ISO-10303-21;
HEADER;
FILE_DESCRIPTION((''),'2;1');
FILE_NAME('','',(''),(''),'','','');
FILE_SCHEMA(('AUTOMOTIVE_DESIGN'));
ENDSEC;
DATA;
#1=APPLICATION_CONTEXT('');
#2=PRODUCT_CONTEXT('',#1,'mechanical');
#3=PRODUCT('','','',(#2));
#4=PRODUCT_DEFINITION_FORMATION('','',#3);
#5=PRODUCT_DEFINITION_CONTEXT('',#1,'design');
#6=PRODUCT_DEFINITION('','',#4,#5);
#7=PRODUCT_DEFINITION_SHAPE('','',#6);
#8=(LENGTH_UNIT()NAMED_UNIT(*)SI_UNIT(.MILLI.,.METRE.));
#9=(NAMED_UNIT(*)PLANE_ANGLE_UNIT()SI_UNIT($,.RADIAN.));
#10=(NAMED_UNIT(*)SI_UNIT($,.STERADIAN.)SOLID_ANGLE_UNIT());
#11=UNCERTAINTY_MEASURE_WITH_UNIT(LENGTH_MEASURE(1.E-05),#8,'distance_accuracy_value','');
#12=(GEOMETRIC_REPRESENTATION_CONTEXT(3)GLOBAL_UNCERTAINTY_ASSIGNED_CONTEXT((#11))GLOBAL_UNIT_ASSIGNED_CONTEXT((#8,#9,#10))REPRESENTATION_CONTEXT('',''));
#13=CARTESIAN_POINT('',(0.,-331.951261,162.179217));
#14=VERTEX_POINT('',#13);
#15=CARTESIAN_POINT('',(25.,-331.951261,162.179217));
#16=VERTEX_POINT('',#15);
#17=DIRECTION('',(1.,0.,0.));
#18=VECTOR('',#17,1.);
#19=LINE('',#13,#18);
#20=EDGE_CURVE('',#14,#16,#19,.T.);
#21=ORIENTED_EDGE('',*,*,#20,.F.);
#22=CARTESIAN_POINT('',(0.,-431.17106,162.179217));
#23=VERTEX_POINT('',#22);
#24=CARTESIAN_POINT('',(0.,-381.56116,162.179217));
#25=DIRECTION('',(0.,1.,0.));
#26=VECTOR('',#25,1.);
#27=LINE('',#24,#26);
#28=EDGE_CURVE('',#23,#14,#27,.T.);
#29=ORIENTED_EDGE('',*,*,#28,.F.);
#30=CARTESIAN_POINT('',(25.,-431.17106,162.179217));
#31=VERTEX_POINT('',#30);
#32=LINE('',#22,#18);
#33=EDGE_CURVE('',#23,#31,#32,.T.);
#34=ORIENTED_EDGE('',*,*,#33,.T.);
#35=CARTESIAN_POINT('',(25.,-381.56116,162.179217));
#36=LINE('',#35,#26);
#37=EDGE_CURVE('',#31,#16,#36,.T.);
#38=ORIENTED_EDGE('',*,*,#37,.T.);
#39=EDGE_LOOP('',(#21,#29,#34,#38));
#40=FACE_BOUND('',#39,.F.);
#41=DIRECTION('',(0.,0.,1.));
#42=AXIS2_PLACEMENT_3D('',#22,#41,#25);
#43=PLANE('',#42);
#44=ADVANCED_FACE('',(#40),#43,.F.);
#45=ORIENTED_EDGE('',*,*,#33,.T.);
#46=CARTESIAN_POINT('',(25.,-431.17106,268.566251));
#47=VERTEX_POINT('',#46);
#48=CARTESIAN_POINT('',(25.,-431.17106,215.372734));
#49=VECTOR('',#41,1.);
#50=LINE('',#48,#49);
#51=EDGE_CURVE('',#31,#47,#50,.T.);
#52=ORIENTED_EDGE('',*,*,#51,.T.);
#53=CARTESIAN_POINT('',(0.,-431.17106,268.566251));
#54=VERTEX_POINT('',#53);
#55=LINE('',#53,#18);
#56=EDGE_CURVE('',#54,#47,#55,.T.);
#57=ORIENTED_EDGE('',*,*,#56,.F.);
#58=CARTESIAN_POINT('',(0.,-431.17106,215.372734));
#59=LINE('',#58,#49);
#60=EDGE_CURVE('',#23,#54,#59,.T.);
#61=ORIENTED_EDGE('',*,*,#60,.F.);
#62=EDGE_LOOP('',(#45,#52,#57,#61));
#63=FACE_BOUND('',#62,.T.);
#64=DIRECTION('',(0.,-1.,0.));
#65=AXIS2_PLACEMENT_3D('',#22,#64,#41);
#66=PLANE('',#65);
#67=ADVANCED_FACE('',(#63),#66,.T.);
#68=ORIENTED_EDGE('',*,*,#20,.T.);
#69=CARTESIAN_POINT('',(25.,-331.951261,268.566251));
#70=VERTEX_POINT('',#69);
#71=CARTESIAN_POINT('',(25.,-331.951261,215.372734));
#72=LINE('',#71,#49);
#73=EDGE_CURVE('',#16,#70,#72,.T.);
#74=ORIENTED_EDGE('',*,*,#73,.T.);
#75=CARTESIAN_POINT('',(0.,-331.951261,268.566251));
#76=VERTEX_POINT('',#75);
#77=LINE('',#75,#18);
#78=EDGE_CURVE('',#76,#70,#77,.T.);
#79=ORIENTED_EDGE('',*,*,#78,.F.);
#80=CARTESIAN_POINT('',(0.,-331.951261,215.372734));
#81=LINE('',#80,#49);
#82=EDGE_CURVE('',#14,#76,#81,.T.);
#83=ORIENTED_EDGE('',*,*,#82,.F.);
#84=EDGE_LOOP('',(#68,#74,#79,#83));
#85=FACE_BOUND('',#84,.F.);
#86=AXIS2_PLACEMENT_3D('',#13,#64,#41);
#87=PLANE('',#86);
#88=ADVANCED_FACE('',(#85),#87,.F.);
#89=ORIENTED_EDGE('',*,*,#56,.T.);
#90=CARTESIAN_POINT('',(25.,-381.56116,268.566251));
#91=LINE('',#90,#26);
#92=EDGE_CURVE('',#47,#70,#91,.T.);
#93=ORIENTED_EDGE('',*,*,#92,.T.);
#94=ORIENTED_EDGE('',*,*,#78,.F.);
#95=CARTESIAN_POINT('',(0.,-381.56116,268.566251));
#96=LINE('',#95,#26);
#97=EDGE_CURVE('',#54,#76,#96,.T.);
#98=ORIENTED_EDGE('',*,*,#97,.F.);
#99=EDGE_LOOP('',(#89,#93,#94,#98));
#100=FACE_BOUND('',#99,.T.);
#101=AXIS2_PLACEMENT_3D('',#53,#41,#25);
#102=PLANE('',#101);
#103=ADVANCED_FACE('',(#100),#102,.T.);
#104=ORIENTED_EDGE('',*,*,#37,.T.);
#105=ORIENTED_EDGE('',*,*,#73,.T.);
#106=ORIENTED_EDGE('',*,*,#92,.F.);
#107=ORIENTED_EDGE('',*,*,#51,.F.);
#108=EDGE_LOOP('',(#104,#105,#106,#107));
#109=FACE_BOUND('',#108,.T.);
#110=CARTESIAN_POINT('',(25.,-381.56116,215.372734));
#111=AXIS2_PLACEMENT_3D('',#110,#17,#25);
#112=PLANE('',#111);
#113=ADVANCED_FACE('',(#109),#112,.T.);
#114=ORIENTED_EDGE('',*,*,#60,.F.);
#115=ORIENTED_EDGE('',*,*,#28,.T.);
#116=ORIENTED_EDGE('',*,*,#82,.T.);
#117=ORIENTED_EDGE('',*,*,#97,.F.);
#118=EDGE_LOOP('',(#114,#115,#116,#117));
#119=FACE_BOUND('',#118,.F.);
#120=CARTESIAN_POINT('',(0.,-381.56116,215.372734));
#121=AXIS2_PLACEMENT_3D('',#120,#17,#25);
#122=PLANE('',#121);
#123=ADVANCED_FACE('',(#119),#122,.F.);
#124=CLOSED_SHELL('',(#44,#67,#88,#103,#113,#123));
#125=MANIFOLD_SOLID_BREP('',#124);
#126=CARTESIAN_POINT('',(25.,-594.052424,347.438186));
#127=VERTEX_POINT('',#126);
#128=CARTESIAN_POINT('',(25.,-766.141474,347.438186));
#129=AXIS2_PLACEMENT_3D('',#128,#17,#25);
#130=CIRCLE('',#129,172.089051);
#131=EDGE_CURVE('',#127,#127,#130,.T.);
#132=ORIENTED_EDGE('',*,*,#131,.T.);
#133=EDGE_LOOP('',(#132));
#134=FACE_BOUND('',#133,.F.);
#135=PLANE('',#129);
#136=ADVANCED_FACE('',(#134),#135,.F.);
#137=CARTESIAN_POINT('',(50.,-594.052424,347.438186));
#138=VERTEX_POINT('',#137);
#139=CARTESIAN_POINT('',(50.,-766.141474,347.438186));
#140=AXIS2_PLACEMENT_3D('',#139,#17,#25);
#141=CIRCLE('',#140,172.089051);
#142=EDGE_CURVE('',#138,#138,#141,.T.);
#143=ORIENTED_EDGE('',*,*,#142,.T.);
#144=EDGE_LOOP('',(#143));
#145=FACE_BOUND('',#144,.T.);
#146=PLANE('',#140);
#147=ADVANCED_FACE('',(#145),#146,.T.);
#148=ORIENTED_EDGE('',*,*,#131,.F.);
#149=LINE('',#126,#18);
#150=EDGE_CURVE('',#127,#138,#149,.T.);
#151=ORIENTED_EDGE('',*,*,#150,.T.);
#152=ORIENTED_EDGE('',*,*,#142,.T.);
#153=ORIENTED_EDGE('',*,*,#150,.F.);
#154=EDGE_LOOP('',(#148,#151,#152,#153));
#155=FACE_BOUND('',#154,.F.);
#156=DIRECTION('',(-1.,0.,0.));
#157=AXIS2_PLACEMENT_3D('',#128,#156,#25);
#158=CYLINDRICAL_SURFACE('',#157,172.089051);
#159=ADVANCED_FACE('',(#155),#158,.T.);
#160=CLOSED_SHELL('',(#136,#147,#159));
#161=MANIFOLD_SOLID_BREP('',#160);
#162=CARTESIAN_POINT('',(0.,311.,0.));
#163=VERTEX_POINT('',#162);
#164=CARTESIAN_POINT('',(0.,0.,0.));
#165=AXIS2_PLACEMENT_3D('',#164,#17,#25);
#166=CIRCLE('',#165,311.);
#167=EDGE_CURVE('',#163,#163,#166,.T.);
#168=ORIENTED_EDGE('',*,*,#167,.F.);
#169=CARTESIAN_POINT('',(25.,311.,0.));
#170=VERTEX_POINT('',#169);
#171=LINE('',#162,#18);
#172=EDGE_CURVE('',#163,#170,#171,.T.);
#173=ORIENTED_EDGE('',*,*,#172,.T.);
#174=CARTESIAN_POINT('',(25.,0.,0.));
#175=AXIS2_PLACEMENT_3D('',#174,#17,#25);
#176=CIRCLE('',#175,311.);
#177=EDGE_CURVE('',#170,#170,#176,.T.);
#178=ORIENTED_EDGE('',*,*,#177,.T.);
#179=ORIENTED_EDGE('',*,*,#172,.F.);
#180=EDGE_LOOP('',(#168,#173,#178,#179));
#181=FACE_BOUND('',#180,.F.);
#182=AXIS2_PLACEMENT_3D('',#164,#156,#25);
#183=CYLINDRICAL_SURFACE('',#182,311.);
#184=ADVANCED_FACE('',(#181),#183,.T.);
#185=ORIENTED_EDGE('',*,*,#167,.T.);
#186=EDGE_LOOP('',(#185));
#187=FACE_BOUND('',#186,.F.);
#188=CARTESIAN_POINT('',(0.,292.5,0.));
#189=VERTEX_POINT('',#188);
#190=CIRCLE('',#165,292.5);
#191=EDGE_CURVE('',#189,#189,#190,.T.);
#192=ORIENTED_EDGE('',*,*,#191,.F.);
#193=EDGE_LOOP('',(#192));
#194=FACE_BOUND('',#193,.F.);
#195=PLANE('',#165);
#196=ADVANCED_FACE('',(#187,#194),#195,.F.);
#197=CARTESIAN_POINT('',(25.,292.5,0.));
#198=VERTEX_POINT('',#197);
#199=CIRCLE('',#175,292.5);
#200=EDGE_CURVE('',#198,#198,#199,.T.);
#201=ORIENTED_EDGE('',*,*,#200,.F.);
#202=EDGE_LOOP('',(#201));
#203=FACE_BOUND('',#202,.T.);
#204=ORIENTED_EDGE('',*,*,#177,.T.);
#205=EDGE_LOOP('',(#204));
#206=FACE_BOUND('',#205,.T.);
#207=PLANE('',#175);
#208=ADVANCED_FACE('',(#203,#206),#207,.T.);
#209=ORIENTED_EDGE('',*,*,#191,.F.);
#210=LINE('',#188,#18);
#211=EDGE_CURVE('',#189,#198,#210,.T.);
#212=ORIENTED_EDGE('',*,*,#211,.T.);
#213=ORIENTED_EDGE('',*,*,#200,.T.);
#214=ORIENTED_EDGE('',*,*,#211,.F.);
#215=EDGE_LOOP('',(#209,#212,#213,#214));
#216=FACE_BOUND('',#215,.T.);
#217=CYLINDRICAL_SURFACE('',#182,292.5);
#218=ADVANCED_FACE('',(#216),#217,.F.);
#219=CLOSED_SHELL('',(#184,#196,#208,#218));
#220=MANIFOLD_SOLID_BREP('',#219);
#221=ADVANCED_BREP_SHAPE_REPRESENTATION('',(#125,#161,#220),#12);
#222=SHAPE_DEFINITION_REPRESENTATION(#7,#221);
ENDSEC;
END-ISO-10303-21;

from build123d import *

# Parameters (mm, degrees)
F1_R     = 311
F1_R_2   = 292.5
F3_DEPTH = 25
F5_W     = 99.2197990417
F5_H     = 106.3870340586
F6_DEPTH = 25
F7_R     = 172.0890507053
F8_DEPTH = 25


# Not quite as in the source:
# - the program builds the solid bodies; features that only make, move or delete a surface that nothing else refers to are left out


with BuildPart() as f3:
    # F1 (on face) → F3 (new body)
    with BuildSketch(Plane.YZ):
        Circle(F1_R)
        Circle(F1_R_2, mode=Mode.SUBTRACT)
    extrude(amount=F3_DEPTH)


with BuildPart() as f6:
    # F5 (on Right) → F6 (new body)
    with BuildSketch(Plane.YZ):
        with Locations((-381.5611600876, 215.3727337718)):
            Rectangle(F5_W, F5_H)
    extrude(amount=F6_DEPTH)


with BuildPart() as f8:
    # F7 (on face) → F8 (new body)
    with BuildSketch(Plane.YZ.offset(25)):
        with Locations((-766.141474247, 347.4381864071)):
            Circle(F7_R)
    extrude(amount=F8_DEPTH)


solid = Compound([f3.part, f6.part, f8.part])
